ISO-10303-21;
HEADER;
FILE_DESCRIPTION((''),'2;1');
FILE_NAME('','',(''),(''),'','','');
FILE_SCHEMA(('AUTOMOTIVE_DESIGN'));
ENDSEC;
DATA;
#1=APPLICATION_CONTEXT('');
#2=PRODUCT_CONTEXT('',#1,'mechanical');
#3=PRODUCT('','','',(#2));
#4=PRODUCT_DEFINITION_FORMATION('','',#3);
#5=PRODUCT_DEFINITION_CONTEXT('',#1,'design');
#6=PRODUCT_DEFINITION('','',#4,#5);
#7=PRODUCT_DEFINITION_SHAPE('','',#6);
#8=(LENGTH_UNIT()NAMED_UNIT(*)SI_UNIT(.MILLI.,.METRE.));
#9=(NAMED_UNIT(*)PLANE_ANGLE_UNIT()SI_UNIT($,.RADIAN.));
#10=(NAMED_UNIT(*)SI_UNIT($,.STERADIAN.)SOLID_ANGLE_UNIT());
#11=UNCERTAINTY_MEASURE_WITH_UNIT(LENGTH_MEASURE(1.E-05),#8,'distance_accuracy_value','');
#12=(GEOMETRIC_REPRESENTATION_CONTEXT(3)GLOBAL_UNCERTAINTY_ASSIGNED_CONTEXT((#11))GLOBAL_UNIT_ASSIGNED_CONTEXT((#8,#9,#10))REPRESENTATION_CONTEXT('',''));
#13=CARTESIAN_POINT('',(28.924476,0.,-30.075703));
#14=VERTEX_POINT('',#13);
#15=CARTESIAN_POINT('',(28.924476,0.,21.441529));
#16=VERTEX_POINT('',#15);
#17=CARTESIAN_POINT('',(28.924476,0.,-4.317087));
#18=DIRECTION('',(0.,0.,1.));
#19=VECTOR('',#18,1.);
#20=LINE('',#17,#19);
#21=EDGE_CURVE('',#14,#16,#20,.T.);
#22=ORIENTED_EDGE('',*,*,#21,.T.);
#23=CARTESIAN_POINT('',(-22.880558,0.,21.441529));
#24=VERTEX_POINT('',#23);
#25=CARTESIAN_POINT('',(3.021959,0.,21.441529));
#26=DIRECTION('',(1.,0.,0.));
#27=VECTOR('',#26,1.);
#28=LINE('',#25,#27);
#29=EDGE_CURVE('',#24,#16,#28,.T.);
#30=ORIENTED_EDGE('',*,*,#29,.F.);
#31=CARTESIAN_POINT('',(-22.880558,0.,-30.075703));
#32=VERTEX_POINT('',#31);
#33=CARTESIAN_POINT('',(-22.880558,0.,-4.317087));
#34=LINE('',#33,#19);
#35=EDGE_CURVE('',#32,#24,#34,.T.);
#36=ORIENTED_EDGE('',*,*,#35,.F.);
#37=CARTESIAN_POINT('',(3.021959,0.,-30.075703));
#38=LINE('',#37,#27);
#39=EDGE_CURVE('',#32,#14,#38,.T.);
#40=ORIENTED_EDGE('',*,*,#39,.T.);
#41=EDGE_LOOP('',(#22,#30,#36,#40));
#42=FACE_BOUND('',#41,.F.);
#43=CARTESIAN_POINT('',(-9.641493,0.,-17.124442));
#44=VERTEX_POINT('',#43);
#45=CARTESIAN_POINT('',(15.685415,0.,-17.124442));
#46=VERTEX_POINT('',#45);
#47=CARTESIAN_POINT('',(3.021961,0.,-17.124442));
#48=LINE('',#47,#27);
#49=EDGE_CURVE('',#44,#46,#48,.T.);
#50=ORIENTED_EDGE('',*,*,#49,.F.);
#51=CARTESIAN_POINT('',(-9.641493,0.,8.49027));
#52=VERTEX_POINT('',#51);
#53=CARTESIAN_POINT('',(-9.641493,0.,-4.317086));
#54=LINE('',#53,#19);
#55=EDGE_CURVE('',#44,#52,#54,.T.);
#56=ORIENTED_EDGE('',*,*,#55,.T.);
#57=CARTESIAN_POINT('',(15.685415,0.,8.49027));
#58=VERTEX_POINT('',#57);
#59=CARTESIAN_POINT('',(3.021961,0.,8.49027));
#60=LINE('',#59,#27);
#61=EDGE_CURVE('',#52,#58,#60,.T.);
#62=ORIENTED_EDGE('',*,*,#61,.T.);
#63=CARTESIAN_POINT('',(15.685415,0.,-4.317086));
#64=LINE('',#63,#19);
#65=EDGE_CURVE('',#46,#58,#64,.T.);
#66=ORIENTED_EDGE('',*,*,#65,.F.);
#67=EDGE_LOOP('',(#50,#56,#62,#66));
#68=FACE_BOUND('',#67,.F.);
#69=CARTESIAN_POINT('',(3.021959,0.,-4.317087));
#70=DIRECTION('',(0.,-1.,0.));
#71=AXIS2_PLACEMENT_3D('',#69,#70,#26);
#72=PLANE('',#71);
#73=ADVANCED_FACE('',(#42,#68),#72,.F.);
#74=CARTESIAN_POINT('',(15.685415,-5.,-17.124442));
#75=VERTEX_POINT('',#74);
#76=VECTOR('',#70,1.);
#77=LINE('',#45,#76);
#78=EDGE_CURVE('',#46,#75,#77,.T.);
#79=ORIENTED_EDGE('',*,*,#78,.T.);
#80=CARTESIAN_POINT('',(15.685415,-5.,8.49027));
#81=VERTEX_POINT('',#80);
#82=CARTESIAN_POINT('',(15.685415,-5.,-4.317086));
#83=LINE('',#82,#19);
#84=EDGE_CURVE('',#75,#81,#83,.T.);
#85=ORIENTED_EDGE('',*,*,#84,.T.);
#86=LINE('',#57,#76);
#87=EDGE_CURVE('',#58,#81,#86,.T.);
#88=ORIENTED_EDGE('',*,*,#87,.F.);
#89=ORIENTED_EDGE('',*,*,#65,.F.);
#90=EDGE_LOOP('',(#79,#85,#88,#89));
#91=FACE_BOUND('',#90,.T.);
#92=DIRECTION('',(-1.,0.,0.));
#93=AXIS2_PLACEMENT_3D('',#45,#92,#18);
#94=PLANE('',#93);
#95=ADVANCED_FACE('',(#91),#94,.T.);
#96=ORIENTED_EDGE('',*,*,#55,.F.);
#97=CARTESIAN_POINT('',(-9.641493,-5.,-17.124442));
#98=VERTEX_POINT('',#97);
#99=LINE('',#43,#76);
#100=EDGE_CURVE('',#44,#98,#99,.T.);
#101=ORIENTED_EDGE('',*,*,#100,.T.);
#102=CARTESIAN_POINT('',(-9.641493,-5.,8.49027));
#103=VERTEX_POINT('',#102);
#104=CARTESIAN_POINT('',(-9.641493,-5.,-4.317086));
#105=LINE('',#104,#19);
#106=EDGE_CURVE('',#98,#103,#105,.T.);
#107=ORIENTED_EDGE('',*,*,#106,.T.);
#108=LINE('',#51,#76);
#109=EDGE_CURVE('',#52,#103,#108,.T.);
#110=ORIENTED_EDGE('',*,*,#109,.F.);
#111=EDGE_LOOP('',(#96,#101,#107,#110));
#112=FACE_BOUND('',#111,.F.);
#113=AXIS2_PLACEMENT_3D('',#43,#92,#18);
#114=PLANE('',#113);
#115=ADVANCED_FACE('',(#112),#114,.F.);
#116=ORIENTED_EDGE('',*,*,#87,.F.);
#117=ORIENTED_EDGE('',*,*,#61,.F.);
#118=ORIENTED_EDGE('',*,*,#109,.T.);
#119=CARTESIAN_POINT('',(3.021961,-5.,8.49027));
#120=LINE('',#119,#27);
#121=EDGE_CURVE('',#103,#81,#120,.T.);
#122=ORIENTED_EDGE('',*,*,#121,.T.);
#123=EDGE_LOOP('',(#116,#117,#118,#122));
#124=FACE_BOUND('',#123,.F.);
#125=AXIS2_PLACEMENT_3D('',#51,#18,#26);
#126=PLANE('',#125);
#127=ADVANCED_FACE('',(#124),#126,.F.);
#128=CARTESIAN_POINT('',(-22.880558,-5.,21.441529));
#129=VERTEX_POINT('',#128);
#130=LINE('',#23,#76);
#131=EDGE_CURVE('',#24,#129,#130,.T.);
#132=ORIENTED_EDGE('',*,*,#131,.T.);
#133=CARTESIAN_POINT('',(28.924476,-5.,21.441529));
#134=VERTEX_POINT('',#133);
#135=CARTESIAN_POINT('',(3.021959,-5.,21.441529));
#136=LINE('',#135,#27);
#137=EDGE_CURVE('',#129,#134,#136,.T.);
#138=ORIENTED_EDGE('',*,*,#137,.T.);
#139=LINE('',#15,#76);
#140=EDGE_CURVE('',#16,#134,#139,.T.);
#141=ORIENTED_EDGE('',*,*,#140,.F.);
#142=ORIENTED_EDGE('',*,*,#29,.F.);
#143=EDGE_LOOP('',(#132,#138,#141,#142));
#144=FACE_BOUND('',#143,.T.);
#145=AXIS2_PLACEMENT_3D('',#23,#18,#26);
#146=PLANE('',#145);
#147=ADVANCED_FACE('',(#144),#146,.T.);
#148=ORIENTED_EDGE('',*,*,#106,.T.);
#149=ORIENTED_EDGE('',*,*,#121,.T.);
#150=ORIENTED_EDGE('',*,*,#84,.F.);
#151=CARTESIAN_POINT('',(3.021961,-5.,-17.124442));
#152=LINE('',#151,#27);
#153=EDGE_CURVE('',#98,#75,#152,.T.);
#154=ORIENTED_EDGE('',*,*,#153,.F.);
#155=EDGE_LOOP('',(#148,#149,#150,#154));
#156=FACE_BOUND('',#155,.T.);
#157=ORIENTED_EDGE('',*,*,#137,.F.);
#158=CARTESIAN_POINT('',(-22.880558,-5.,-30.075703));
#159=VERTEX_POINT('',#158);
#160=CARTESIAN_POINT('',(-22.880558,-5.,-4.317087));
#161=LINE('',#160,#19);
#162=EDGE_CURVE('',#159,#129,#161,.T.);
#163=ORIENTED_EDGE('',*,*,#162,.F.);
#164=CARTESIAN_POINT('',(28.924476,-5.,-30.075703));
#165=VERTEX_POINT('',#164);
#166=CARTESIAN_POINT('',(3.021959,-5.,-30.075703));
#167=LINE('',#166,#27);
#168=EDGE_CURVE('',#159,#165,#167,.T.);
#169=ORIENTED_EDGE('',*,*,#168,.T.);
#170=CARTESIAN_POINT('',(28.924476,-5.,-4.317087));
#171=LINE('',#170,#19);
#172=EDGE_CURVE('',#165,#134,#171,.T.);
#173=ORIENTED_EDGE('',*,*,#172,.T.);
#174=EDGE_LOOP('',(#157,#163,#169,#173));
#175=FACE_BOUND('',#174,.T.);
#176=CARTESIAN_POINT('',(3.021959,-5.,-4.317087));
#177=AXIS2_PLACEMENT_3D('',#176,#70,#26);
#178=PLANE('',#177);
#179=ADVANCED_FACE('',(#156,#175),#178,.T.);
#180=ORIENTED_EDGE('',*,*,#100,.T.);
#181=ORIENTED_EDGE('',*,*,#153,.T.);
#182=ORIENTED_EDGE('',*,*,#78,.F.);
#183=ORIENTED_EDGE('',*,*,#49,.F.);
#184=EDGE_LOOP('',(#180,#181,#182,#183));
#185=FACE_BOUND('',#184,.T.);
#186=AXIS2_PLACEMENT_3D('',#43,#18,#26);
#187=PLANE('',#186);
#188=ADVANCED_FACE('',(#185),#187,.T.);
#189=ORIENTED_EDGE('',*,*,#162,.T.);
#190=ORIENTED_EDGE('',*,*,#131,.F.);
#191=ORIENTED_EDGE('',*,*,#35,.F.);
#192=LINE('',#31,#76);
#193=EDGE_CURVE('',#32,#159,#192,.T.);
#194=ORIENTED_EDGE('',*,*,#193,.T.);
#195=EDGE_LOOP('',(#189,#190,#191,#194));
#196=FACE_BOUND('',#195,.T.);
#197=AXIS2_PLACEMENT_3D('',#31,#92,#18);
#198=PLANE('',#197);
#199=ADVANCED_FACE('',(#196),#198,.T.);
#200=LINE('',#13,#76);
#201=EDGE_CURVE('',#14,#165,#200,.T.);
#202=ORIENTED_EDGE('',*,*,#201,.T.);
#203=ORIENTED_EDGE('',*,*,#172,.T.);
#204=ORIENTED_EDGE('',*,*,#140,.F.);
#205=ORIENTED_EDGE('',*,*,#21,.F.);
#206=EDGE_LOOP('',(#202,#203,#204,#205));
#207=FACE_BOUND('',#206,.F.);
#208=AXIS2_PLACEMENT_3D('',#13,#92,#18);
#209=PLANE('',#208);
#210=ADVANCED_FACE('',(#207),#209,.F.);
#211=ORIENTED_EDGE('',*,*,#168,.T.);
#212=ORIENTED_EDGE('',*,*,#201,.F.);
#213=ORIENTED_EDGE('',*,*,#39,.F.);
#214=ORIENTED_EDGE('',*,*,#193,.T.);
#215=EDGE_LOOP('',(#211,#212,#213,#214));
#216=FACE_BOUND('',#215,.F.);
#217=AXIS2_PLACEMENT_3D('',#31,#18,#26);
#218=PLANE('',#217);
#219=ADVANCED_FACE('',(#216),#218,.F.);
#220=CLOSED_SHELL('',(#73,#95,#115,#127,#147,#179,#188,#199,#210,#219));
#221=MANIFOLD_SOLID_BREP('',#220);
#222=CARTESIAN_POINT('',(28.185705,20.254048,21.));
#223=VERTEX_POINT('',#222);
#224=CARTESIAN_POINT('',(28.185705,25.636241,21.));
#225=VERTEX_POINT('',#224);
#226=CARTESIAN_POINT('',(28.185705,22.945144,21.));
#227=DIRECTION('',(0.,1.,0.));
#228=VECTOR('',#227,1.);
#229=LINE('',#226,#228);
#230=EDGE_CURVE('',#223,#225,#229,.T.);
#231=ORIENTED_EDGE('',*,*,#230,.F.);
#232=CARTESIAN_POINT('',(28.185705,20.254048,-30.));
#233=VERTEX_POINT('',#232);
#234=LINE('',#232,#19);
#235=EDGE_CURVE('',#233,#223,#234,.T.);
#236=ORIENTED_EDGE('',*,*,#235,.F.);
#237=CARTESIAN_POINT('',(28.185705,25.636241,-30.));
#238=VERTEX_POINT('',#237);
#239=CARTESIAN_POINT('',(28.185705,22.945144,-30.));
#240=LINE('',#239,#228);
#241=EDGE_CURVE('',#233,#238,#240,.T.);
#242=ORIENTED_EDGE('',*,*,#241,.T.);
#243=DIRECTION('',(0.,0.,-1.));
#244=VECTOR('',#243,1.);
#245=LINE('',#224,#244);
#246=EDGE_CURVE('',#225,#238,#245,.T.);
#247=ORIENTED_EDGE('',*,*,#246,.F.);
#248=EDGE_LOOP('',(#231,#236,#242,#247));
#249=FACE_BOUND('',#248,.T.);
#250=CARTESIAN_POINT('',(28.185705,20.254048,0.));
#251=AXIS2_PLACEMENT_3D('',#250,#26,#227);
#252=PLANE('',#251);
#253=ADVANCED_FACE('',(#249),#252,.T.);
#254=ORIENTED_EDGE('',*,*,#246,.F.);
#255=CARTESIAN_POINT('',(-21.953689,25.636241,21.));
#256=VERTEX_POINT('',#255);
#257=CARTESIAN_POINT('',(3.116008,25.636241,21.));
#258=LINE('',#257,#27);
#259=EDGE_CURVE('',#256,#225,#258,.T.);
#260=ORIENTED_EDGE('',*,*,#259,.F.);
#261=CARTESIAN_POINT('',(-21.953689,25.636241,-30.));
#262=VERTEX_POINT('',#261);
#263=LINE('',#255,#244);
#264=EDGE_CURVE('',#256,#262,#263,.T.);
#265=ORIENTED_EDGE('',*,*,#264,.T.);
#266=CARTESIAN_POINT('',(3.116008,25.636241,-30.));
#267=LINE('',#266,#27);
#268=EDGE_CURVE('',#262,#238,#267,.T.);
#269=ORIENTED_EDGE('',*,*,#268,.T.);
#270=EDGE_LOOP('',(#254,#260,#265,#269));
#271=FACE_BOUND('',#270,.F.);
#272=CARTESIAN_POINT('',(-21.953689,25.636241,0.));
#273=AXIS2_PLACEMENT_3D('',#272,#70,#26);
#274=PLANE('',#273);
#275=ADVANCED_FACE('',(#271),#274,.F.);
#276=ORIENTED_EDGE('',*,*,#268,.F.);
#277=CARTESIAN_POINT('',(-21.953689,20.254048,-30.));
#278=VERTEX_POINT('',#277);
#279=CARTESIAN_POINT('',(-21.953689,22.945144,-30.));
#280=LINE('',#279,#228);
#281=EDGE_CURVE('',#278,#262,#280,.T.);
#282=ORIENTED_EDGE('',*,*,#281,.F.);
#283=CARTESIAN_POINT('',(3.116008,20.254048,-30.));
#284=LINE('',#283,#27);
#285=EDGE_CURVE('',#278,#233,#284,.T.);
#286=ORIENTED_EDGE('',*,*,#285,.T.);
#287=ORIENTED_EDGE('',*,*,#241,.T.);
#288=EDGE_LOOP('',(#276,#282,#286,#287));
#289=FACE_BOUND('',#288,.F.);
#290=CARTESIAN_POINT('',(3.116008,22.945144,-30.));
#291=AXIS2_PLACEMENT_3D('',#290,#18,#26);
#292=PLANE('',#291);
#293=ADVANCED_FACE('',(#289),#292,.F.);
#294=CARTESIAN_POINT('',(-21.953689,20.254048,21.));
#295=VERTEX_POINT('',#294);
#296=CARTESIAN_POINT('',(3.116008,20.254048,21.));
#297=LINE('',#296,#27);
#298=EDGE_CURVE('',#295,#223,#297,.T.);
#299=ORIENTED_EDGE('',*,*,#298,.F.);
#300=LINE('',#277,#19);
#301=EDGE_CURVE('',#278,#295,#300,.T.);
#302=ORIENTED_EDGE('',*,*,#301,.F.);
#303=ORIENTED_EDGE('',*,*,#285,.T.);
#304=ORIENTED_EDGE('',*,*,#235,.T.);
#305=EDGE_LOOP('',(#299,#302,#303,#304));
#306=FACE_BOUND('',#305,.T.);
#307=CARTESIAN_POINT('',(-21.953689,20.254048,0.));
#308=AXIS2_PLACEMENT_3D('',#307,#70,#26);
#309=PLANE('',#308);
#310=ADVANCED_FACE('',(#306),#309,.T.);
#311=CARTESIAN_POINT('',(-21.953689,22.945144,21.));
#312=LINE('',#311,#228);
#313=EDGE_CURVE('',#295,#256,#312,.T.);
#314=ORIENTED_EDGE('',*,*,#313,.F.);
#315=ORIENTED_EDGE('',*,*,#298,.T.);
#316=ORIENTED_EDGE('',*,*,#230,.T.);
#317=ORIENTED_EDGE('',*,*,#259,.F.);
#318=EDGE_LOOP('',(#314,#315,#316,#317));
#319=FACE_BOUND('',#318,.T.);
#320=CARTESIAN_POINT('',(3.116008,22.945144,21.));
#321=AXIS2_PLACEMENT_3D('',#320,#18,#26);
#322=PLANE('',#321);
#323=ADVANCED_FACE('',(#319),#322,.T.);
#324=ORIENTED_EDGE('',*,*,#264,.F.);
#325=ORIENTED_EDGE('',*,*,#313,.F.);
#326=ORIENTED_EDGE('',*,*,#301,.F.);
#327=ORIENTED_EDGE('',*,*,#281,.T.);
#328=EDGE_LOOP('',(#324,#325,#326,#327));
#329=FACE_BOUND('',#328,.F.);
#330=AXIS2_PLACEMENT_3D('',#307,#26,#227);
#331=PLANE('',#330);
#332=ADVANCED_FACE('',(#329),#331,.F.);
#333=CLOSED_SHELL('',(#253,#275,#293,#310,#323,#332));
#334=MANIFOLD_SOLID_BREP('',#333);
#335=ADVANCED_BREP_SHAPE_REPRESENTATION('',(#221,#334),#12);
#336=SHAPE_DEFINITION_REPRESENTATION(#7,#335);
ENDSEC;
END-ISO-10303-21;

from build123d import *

# Parameters (mm, degrees)
F0_W     = 51.8050342798
F0_H     = 51.5172313899
F0_W_2   = 25.3269076347
F0_H_2   = 25.6147123873
F1_DEPTH = 5
F3_W     = 50.1393936574
F3_H     = 5.3821932524
F4_DEPTH = 21
F5_DEPTH = 30


# Not quite as in the source:
# - the program builds the solid bodies; features that only make, move or delete a surface that nothing else refers to are left out


with BuildPart() as f1:
    # F0 (on Front) → F1 (new body)
    with BuildSketch(Plane.XZ):
        with Locations((3.0219592154, -4.3170871213)):
            Rectangle(F0_W, F0_H)
        with Locations((3.021961078, -4.31708619)):
            Rectangle(F0_W_2, F0_H_2, mode=Mode.SUBTRACT)
    extrude(amount=F1_DEPTH)


with BuildPart() as f4:
    # F3 (on Top) → F4 (new body)
    with BuildSketch(Plane.XY):
        with Locations((3.1160078943, 22.9451442137)):
            Rectangle(F3_W, F3_H)
    extrude(amount=F4_DEPTH)

    # F5 (add): a face of the model
    f5_faces = [f4.faces().sort_by_distance(p)[0] for p in [
        (3.1160078943, 22.9451442137, 0),
    ]]
    extrude(f5_faces, amount=F5_DEPTH)


solid = Compound([f1.part, f4.part])
